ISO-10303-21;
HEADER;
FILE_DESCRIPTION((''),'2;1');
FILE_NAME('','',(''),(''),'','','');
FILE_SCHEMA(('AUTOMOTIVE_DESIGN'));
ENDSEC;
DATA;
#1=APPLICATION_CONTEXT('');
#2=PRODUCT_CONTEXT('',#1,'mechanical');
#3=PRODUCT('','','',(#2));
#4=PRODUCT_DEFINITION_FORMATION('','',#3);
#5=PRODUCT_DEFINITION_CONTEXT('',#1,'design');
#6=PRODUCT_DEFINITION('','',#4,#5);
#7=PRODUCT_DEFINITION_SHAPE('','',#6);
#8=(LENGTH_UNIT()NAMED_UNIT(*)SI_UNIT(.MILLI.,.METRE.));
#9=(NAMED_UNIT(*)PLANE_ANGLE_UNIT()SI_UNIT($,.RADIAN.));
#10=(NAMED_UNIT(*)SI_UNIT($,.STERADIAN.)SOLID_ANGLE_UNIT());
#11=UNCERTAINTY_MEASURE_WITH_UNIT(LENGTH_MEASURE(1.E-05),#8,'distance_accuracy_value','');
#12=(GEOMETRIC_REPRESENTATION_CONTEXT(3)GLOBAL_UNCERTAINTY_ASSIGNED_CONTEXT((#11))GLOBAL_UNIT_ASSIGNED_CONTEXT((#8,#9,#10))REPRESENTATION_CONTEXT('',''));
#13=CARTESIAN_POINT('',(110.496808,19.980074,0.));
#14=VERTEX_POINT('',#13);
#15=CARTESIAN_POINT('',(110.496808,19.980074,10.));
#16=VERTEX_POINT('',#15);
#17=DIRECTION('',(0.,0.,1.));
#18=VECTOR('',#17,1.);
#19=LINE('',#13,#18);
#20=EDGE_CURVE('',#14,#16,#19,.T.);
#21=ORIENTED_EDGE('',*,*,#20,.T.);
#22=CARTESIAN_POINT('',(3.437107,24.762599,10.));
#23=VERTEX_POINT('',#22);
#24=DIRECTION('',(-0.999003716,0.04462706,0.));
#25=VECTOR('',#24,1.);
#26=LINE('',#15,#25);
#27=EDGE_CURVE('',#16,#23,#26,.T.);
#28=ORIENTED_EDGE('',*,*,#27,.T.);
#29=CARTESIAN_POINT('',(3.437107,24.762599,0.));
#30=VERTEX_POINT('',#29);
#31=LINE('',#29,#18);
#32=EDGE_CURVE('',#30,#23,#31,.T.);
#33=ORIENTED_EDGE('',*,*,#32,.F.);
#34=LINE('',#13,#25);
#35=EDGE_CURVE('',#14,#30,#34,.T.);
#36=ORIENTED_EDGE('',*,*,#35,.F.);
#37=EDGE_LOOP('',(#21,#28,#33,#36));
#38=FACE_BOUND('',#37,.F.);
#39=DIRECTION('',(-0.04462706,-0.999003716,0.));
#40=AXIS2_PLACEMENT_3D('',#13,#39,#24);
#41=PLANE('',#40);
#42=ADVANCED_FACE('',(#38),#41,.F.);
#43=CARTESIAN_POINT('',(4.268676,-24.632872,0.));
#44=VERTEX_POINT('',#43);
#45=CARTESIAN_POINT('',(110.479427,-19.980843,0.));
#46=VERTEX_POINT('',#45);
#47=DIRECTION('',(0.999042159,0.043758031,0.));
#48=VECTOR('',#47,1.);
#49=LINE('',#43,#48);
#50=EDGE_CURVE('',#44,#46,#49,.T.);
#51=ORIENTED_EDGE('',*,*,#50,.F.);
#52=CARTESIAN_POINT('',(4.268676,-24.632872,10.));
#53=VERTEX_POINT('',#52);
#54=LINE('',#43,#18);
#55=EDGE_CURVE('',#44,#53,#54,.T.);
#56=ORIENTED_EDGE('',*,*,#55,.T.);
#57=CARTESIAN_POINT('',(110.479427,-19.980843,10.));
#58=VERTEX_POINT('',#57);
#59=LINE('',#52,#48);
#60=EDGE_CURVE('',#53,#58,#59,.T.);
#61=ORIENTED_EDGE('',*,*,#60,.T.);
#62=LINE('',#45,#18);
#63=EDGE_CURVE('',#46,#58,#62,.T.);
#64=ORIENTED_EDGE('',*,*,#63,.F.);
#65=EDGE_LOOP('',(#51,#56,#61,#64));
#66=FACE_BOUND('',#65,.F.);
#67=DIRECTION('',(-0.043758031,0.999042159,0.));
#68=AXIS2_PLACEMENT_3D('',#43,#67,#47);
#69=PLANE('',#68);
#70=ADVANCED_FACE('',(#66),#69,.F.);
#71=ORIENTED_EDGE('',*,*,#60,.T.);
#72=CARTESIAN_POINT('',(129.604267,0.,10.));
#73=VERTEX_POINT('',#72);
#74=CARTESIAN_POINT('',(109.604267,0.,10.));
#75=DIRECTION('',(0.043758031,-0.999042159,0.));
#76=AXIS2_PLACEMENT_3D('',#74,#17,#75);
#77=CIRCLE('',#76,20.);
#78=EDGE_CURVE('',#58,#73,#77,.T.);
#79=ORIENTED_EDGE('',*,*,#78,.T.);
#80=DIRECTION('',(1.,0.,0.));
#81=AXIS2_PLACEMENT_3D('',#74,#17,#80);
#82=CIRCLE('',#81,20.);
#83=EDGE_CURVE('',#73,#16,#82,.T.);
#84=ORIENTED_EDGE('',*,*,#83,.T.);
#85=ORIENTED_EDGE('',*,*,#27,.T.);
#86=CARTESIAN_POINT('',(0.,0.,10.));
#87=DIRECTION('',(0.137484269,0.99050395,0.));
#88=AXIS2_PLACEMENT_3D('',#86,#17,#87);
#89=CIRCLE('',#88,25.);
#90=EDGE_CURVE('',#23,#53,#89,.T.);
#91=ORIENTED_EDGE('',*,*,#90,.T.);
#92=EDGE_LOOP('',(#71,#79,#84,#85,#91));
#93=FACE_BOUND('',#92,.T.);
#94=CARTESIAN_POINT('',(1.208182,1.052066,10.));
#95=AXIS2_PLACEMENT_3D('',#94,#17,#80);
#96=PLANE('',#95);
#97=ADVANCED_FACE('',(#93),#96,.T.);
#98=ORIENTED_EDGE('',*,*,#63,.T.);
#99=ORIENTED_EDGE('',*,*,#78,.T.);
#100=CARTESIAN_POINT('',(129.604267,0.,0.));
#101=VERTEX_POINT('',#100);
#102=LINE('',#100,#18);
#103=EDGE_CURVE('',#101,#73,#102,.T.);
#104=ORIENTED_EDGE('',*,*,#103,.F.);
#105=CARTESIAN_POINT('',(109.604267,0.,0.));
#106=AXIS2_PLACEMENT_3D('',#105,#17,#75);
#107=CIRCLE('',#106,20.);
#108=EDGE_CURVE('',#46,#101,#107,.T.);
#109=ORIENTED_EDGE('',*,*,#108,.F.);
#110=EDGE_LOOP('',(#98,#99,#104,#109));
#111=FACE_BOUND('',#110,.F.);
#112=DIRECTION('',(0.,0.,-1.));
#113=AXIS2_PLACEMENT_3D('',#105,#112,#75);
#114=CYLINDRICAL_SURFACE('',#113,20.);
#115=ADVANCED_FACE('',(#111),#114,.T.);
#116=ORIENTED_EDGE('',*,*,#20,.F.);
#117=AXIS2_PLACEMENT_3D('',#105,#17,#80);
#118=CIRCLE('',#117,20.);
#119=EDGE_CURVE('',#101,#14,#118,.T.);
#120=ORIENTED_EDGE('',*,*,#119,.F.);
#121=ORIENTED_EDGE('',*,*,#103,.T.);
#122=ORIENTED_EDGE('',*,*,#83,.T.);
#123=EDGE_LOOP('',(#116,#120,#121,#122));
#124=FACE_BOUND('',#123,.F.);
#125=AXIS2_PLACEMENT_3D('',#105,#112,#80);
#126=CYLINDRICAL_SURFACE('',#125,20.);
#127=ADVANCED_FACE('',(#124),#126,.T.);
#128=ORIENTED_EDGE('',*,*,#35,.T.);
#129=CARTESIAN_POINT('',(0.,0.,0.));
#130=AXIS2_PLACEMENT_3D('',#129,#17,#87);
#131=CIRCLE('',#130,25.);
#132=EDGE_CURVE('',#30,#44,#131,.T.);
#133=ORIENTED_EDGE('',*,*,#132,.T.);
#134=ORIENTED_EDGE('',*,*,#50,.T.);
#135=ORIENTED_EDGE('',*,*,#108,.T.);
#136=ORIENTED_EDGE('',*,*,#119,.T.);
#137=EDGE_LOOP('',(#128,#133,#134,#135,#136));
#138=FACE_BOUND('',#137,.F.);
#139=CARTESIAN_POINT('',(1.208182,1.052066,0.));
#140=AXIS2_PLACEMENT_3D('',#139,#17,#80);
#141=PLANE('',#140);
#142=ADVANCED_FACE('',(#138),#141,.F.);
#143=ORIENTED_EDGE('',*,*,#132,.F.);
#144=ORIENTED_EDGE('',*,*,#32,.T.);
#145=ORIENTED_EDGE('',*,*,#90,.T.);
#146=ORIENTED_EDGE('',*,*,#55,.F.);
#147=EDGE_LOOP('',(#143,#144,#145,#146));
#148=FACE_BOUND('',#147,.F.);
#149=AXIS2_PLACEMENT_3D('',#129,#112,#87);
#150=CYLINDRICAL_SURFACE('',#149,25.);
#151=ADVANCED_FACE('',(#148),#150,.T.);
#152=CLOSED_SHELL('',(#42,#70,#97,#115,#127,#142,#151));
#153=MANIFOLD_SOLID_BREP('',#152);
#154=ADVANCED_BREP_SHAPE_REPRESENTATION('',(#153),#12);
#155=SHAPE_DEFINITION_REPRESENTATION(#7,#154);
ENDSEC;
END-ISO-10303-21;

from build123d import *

# Parameters (mm, degrees)
F1_DEPTH = 10


# Not quite as in the source:
# - the program builds the solid bodies; features that only make, move or delete a surface that nothing else refers to are left out


with BuildPart() as f1:
    # F0 (on Top) → F1 (new body)
    with BuildSketch(Plane.XY):
        with BuildLine():
            ThreePointArc((4.2686762947, -24.6328724003), (19.1274267397, -16.0978739688), (25, 0))
            ThreePointArc((25, 0), (18.8537485405, 16.4175566383), (3.4371067222, 24.7625987606))
            ThreePointArc((3.4371067222, 24.7625987606), (-24.9964580647, -0.42081376), (4.2686762947, -24.6328724003))
        make_face()
        with BuildLine():
            ThreePointArc((110.4968080295, 19.9800743296), (95.7812936366, 14.4542523825), (89.6042668357, 0))
            ThreePointArc((89.6042668357, 0), (95.7750082208, -14.4482388602), (110.4794274519, -19.9808431728))
            ThreePointArc((110.4794274519, -19.9808431728), (124.0525056959, -13.8292586149), (129.6042668357, 0))
            ThreePointArc((129.6042668357, 0), (124.0585192182, 13.8229731991), (110.4968080295, 19.9800743296))
        make_face()
        with BuildLine():
            Line((89.6042668357, 0), (25, 0))
            ThreePointArc((25, 0), (19.1274267397, -16.0978739688), (4.2686762947, -24.6328724003))
            Line((4.2686762947, -24.6328724003), (110.4794274519, -19.9808431728))
            ThreePointArc((110.4794274519, -19.9808431728), (95.7750082208, -14.4482388602), (89.6042668357, 0))
        make_face()
        with BuildLine():
            ThreePointArc((3.4371067222, 24.7625987606), (18.8537485405, 16.4175566383), (25, 0))
            Line((25, 0), (89.6042668357, 0))
            ThreePointArc((89.6042668357, 0), (95.7812936366, 14.4542523825), (110.4968080295, 19.9800743296))
            Line((110.4968080295, 19.9800743296), (3.4371067222, 24.7625987606))
        make_face()
    extrude(amount=F1_DEPTH)


solid = f1.part
